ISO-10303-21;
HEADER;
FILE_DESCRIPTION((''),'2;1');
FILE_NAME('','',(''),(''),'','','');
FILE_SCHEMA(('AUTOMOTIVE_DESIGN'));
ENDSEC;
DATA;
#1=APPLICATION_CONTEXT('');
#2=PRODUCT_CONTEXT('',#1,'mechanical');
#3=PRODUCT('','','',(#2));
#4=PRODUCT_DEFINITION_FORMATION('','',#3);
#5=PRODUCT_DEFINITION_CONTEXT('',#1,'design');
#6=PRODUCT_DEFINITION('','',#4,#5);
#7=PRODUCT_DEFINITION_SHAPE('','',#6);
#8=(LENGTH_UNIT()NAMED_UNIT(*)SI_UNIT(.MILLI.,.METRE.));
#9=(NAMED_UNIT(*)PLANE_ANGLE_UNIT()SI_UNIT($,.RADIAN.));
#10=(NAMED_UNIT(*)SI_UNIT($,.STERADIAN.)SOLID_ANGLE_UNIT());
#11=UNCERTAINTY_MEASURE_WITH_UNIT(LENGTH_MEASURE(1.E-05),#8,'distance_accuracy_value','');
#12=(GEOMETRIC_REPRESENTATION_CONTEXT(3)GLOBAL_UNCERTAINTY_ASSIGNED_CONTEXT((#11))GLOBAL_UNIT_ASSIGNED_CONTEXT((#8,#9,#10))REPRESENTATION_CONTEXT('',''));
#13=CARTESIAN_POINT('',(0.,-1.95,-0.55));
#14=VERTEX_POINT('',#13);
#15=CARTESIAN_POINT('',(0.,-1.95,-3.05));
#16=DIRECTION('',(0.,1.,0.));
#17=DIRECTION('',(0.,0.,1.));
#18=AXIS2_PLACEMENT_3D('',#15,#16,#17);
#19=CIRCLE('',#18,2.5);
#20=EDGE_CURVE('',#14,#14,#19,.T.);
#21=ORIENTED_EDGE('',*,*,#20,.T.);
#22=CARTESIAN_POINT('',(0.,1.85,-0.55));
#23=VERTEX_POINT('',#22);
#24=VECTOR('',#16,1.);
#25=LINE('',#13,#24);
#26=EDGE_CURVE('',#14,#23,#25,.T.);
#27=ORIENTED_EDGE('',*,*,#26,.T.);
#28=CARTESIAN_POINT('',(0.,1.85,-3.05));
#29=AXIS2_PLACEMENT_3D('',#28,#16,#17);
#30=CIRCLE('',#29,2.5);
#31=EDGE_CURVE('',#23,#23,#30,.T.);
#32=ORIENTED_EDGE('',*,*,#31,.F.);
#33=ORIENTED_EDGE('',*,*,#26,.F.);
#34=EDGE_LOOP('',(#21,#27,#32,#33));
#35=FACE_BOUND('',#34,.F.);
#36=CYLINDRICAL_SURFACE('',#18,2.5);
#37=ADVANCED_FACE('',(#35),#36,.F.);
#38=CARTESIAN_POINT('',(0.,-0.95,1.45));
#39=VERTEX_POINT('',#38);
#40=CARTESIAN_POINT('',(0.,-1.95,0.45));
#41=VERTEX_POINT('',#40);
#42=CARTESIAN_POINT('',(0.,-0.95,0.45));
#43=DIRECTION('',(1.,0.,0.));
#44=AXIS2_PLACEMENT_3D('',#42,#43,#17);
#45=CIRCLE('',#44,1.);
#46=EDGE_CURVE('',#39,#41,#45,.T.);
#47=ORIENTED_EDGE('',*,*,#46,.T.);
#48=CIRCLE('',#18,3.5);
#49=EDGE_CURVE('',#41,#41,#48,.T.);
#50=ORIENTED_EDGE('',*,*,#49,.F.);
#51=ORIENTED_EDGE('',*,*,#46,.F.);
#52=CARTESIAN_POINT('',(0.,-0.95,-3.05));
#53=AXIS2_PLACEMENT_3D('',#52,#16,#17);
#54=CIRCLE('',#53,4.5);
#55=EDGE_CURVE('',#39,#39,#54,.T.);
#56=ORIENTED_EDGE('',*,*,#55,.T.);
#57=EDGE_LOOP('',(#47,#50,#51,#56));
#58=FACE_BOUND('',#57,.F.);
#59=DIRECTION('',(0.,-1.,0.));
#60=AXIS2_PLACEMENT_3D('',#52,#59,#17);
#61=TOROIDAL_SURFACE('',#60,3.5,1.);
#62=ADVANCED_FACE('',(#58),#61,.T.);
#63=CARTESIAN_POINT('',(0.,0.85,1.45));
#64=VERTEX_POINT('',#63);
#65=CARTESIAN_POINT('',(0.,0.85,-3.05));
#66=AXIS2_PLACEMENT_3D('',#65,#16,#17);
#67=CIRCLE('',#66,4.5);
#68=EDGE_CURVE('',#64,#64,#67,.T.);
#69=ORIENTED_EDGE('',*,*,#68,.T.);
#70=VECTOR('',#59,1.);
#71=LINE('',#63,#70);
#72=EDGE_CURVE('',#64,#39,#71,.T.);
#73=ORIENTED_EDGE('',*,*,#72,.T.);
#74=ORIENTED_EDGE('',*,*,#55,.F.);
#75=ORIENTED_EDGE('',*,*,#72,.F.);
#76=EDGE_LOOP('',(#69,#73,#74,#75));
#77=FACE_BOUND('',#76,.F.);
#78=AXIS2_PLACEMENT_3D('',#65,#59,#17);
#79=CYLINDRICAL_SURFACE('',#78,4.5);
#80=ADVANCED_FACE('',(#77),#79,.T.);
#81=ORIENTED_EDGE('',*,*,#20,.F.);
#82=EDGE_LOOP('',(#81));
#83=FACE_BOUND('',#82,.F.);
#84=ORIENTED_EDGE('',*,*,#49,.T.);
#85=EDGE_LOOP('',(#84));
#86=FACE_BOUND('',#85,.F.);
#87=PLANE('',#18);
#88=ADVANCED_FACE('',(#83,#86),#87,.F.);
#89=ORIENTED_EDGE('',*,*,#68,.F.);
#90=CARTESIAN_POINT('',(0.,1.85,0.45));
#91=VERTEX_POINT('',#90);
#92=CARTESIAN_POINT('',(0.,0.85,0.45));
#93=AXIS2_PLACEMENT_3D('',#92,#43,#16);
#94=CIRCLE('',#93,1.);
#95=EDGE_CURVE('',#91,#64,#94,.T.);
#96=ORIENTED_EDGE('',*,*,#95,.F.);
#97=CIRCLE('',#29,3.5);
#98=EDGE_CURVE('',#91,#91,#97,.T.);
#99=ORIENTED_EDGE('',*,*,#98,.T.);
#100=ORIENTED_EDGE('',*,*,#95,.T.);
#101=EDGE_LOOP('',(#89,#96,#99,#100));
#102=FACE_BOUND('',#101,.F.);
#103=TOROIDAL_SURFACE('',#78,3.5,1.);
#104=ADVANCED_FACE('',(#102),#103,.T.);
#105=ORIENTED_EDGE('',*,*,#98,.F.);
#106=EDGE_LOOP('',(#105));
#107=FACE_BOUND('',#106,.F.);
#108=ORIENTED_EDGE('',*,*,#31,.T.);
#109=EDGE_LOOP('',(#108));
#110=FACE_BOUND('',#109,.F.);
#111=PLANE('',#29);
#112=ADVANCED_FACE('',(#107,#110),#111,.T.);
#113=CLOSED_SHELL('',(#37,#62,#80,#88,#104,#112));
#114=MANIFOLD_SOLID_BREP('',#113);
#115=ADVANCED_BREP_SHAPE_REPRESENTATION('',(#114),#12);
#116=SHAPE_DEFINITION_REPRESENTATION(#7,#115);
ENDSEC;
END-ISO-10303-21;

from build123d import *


# Not quite as in the source:
# - a feature names something its author has since deleted; it is built from what else it names


with BuildPart() as f2:
    # F0 (on Right) → F2 (revolve)
    with BuildSketch(Plane.YZ):
        with BuildLine():
            ThreePointArc((-0.95, 1.45), (-1.6571067812, 1.1571067812), (-1.95, 0.45))
            Line((-1.95, 0.45), (-1.95, -0.55))
            Line((-1.95, -0.55), (1.85, -0.55))
            Line((1.85, -0.55), (1.85, 0.45))
            ThreePointArc((1.85, 0.45), (1.5571067812, 1.1571067812), (0.85, 1.45))
            Line((0.85, 1.45), (-0.95, 1.45))
        make_face()
    revolve(axis=Axis((0, 0.1895423047, -3.05), (0, 1, 0)))


solid = f2.part
